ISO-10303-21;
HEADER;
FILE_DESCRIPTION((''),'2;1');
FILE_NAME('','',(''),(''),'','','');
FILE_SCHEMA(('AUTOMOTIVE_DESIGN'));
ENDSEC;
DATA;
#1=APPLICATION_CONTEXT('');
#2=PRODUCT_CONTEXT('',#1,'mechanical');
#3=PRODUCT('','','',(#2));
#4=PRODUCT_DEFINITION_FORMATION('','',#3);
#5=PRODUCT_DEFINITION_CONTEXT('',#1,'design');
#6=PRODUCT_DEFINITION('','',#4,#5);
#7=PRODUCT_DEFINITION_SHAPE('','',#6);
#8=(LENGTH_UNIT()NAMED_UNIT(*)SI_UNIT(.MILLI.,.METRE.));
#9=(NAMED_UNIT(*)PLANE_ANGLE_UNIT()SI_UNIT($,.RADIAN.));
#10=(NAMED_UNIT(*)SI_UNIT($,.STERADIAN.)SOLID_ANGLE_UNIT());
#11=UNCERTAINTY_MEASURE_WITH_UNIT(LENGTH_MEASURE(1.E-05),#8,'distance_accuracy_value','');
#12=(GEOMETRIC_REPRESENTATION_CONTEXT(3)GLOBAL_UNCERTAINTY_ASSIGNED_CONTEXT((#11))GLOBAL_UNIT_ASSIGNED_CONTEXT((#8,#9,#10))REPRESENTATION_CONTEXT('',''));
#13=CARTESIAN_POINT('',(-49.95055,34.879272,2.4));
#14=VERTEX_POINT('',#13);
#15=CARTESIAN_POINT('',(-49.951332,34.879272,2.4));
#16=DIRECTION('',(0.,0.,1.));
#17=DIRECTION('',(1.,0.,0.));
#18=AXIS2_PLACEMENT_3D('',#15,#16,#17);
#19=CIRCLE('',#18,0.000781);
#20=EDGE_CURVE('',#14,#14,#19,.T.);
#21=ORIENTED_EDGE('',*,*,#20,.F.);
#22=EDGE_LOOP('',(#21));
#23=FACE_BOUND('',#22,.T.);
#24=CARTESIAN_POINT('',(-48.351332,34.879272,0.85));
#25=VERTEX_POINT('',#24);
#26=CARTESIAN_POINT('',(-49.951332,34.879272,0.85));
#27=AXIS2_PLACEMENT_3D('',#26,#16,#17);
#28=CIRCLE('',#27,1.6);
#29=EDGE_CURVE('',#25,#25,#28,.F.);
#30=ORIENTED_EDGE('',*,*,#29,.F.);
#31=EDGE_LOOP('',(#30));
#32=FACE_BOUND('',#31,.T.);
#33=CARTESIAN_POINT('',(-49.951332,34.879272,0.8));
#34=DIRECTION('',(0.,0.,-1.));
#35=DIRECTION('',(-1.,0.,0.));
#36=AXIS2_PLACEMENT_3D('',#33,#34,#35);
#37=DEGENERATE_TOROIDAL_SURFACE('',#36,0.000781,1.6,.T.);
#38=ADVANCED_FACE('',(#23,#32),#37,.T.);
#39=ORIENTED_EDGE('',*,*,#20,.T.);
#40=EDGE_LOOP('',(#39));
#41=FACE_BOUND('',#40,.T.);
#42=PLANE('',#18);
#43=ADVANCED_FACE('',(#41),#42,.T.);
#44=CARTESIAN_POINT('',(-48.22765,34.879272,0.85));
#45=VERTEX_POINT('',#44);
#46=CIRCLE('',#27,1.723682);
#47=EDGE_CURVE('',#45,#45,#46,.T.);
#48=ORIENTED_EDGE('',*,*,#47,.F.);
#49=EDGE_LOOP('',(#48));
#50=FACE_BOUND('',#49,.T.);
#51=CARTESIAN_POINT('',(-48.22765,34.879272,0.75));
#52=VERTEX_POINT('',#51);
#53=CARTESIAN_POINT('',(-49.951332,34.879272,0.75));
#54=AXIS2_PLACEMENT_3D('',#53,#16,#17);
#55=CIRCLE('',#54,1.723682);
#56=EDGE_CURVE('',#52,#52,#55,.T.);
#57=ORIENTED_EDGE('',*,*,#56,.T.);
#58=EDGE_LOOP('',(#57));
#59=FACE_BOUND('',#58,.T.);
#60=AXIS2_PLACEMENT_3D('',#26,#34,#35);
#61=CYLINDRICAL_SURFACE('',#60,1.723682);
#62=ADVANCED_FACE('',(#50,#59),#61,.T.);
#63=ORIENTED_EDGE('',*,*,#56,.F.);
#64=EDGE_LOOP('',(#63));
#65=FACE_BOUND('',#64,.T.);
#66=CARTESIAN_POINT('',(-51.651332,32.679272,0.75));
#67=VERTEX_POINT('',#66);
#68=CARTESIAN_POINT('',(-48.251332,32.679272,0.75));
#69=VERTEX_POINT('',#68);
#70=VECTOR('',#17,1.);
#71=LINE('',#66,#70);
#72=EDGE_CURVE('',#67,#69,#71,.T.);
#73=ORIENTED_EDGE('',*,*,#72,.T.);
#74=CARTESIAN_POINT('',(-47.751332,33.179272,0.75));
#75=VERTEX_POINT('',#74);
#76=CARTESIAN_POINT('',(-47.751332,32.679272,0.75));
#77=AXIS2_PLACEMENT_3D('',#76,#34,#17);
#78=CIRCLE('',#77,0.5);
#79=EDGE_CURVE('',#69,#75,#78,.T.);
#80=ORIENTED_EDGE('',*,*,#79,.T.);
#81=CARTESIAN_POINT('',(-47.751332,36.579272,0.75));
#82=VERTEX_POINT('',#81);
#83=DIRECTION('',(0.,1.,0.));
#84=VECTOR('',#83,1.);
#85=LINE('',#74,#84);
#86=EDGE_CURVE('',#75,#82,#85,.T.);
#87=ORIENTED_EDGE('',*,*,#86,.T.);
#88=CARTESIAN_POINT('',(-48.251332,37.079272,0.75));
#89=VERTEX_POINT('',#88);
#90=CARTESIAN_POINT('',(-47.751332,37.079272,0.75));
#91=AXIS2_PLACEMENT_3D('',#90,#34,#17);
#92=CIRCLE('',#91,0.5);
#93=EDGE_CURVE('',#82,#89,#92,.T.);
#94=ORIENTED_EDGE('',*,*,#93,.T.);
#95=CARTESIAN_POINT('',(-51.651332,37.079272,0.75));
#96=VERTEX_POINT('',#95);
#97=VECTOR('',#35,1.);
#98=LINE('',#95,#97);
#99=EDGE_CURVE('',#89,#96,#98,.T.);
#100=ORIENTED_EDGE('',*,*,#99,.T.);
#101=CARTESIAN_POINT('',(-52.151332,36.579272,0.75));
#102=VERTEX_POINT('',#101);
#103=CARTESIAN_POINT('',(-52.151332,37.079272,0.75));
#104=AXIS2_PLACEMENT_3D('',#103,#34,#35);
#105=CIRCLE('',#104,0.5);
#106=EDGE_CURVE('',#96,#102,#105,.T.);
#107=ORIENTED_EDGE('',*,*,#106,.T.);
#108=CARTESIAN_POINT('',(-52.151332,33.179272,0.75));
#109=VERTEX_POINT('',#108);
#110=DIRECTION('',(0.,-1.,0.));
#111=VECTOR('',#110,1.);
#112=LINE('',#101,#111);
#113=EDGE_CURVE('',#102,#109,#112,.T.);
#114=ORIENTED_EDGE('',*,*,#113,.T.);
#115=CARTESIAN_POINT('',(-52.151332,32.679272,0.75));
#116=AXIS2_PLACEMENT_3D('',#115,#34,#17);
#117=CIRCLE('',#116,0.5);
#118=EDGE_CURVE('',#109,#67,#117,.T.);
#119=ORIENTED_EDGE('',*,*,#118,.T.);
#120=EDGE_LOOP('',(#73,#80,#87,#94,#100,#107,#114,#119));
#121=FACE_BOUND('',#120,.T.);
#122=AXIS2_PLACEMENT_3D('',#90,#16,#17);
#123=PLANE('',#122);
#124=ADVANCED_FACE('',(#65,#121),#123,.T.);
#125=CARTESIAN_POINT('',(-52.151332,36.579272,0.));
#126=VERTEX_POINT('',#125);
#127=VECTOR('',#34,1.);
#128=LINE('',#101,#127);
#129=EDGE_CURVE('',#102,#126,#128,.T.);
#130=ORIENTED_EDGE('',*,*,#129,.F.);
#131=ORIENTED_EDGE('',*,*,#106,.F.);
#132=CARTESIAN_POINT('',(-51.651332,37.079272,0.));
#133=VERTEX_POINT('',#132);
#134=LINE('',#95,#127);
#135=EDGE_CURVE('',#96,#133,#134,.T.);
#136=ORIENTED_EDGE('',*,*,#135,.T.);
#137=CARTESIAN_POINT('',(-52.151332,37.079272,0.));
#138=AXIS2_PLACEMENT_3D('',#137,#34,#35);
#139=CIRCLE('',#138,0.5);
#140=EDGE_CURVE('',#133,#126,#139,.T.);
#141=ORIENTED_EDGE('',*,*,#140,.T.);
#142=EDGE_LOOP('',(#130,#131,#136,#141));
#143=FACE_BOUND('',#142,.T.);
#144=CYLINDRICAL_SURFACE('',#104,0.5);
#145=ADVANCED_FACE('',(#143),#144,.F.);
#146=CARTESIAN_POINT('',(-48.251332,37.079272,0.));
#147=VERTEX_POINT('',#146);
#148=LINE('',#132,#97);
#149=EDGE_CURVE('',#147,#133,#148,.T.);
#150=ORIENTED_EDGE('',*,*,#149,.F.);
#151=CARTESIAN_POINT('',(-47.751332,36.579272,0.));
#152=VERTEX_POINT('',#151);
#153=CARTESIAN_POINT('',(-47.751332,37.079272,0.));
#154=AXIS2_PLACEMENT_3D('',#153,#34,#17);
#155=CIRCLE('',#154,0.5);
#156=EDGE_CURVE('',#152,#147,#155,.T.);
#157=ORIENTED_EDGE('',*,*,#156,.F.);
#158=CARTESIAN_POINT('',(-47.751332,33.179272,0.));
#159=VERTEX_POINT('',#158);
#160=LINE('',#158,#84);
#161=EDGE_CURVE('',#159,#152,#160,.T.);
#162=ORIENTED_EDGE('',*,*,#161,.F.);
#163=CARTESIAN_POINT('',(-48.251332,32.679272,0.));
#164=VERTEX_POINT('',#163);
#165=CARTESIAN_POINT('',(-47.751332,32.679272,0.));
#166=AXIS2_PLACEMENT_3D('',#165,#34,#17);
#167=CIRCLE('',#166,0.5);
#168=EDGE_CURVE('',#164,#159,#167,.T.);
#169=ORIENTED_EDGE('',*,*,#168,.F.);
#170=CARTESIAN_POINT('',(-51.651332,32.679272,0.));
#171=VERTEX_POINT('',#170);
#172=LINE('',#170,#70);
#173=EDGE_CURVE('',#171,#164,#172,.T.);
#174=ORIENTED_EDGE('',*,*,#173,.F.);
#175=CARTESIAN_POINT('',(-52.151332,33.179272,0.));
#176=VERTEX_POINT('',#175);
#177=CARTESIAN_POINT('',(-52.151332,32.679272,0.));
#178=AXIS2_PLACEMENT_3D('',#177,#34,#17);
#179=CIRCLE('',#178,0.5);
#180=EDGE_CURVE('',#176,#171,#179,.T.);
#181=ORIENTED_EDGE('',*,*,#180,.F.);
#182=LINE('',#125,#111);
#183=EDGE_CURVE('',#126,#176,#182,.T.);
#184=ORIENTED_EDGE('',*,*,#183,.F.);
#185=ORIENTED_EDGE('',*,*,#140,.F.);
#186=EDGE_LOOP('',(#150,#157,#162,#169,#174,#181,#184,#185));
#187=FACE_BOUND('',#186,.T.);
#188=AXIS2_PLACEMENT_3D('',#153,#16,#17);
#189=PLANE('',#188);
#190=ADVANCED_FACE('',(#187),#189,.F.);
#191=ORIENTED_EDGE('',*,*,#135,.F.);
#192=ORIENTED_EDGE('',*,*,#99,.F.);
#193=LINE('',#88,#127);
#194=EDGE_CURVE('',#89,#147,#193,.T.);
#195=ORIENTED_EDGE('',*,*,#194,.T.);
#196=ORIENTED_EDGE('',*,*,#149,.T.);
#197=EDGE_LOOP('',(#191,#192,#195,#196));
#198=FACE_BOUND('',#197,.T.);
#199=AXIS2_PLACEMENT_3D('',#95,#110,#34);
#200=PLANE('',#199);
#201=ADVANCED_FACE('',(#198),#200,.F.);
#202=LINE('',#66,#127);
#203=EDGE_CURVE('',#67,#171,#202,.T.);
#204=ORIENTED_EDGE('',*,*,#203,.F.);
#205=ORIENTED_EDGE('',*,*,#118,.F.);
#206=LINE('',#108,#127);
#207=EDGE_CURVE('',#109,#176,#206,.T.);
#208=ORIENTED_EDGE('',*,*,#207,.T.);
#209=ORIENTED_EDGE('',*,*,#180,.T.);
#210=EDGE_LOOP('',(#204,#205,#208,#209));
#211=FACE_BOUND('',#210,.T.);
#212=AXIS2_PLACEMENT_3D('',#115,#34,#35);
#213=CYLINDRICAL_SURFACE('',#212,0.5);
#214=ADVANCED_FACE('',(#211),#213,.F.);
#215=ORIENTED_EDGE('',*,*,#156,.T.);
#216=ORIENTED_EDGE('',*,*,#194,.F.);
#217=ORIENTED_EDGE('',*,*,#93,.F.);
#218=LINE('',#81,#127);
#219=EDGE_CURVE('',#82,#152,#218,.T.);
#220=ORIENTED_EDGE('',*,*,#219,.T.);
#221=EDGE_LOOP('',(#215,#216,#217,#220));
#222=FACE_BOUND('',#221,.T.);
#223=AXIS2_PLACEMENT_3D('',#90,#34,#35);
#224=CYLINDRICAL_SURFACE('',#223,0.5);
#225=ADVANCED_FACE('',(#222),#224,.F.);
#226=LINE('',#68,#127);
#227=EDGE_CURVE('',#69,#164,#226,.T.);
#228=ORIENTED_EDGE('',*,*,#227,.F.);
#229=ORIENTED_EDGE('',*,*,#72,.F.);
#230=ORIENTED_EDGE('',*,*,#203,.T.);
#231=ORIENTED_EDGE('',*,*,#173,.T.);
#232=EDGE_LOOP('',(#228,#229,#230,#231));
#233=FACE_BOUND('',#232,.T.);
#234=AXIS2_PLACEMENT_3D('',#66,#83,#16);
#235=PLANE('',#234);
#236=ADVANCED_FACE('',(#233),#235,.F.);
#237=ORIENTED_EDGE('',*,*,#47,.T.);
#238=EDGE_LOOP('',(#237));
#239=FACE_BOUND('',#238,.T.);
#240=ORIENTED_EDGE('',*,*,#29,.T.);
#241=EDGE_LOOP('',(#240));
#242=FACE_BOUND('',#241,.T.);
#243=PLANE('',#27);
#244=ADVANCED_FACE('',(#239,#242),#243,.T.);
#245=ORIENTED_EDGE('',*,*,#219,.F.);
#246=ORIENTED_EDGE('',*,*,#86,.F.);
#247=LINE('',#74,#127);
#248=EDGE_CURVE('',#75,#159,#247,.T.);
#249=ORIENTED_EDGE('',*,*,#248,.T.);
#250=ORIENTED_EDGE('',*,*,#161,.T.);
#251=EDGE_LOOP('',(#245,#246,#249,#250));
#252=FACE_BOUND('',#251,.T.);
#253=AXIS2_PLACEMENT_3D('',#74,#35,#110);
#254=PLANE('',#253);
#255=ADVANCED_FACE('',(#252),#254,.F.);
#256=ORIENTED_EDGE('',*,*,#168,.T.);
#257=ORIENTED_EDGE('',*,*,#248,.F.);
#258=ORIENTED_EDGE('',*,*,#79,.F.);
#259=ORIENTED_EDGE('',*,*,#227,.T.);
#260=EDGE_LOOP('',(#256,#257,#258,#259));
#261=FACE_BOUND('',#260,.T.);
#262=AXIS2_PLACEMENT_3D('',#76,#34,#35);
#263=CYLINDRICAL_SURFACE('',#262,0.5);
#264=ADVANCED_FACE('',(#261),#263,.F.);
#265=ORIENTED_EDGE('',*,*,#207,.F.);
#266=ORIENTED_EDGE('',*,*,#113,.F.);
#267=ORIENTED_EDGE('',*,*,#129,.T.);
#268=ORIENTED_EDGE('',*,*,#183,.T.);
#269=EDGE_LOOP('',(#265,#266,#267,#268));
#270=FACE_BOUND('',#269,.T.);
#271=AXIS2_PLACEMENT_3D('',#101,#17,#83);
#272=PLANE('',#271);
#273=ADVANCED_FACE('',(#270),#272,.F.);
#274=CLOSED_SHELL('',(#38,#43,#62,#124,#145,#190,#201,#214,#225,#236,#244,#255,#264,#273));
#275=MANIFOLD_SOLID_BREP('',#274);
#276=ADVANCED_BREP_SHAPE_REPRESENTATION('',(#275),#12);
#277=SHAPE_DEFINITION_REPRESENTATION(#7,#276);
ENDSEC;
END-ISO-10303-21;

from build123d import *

# Parameters (mm, degrees)
P_IDAT_VYSUNUT_M1_DEPTH = 0.75
SKICA4_R                = 1.723681802
P_IDAT_VYSUNUT_M3_DEPTH = 0.1
SKICA5_R                = 1.6
P_IDAT_VYSUNUT_M4_DEPTH = 1.65
ZAOBLIT7_R              = 1.6


with BuildPart() as part:
    # Skica1 → Přidat vysunutím1 (new body)
    with BuildSketch(Plane.XY):
        with BuildLine():
            Line((-51.651331746, 37.07927242), (-48.251331746, 37.07927242))
            ThreePointArc((-48.251331746, 37.07927242), (-48.104885136, 36.725719029), (-47.751331746, 36.57927242))
            Line((-47.751331746, 36.57927242), (-47.751331746, 33.17927242))
            ThreePointArc((-47.751331746, 33.17927242), (-48.104885136, 33.03282581), (-48.251331746, 32.67927242))
            Line((-48.251331746, 32.67927242), (-51.651331746, 32.67927242))
            ThreePointArc((-51.651331746, 32.67927242), (-51.797778355, 33.03282581), (-52.151331746, 33.17927242))
            Line((-52.151331746, 33.17927242), (-52.151331746, 36.57927242))
            ThreePointArc((-52.151331746, 36.57927242), (-51.797778355, 36.725719029), (-51.651331746, 37.07927242))
        make_face()
    extrude(amount=P_IDAT_VYSUNUT_M1_DEPTH)

    # Skica4 → Přidat vysunutím3 (add)
    with BuildSketch(Plane.XY.offset(0.75)):
        with Locations((-49.951331746, 34.87927242)):
            Circle(SKICA4_R)
    extrude(amount=P_IDAT_VYSUNUT_M3_DEPTH)

    # Skica5 → Přidat vysunutím4 (add)
    with BuildSketch(Plane.XY.offset(0.75)):
        with Locations((-49.951331746, 34.87927242)):
            Circle(SKICA5_R)
    extrude(amount=P_IDAT_VYSUNUT_M4_DEPTH)

    # Zaoblit7
    # the kernel refuses this fillet: 1.6 mm, written as the material it takes off along each edge
    with BuildSketch(Plane(origin=(-49.951331746, 34.87927242, 2.4), x_dir=(1, 0, 0), z_dir=(0, -1, 0))) as zaoblit7_piece_1:
        with BuildLine():
            CenterArc((0.000781441, -1.6), ZAOBLIT7_R, 1.790784659, 88.209215341)
            Line((0.000781441, 0), (0.000781441, 0.032))
            Line((0.000781441, 0.032), (1.6, 0.032))
            Line((1.6, 0.032), (1.632, 0))
            ThreePointArc((1.632, 0), (1.632, -0.775), (1.631984371, -1.549))
            Line((1.631984371, -1.549), (1.6, -1.55))
        make_face()
    revolve(axis=Axis((-49.951331746, 34.87927242, 2.4), (0, 0, 1)), mode=Mode.SUBTRACT)


solid = part.part
